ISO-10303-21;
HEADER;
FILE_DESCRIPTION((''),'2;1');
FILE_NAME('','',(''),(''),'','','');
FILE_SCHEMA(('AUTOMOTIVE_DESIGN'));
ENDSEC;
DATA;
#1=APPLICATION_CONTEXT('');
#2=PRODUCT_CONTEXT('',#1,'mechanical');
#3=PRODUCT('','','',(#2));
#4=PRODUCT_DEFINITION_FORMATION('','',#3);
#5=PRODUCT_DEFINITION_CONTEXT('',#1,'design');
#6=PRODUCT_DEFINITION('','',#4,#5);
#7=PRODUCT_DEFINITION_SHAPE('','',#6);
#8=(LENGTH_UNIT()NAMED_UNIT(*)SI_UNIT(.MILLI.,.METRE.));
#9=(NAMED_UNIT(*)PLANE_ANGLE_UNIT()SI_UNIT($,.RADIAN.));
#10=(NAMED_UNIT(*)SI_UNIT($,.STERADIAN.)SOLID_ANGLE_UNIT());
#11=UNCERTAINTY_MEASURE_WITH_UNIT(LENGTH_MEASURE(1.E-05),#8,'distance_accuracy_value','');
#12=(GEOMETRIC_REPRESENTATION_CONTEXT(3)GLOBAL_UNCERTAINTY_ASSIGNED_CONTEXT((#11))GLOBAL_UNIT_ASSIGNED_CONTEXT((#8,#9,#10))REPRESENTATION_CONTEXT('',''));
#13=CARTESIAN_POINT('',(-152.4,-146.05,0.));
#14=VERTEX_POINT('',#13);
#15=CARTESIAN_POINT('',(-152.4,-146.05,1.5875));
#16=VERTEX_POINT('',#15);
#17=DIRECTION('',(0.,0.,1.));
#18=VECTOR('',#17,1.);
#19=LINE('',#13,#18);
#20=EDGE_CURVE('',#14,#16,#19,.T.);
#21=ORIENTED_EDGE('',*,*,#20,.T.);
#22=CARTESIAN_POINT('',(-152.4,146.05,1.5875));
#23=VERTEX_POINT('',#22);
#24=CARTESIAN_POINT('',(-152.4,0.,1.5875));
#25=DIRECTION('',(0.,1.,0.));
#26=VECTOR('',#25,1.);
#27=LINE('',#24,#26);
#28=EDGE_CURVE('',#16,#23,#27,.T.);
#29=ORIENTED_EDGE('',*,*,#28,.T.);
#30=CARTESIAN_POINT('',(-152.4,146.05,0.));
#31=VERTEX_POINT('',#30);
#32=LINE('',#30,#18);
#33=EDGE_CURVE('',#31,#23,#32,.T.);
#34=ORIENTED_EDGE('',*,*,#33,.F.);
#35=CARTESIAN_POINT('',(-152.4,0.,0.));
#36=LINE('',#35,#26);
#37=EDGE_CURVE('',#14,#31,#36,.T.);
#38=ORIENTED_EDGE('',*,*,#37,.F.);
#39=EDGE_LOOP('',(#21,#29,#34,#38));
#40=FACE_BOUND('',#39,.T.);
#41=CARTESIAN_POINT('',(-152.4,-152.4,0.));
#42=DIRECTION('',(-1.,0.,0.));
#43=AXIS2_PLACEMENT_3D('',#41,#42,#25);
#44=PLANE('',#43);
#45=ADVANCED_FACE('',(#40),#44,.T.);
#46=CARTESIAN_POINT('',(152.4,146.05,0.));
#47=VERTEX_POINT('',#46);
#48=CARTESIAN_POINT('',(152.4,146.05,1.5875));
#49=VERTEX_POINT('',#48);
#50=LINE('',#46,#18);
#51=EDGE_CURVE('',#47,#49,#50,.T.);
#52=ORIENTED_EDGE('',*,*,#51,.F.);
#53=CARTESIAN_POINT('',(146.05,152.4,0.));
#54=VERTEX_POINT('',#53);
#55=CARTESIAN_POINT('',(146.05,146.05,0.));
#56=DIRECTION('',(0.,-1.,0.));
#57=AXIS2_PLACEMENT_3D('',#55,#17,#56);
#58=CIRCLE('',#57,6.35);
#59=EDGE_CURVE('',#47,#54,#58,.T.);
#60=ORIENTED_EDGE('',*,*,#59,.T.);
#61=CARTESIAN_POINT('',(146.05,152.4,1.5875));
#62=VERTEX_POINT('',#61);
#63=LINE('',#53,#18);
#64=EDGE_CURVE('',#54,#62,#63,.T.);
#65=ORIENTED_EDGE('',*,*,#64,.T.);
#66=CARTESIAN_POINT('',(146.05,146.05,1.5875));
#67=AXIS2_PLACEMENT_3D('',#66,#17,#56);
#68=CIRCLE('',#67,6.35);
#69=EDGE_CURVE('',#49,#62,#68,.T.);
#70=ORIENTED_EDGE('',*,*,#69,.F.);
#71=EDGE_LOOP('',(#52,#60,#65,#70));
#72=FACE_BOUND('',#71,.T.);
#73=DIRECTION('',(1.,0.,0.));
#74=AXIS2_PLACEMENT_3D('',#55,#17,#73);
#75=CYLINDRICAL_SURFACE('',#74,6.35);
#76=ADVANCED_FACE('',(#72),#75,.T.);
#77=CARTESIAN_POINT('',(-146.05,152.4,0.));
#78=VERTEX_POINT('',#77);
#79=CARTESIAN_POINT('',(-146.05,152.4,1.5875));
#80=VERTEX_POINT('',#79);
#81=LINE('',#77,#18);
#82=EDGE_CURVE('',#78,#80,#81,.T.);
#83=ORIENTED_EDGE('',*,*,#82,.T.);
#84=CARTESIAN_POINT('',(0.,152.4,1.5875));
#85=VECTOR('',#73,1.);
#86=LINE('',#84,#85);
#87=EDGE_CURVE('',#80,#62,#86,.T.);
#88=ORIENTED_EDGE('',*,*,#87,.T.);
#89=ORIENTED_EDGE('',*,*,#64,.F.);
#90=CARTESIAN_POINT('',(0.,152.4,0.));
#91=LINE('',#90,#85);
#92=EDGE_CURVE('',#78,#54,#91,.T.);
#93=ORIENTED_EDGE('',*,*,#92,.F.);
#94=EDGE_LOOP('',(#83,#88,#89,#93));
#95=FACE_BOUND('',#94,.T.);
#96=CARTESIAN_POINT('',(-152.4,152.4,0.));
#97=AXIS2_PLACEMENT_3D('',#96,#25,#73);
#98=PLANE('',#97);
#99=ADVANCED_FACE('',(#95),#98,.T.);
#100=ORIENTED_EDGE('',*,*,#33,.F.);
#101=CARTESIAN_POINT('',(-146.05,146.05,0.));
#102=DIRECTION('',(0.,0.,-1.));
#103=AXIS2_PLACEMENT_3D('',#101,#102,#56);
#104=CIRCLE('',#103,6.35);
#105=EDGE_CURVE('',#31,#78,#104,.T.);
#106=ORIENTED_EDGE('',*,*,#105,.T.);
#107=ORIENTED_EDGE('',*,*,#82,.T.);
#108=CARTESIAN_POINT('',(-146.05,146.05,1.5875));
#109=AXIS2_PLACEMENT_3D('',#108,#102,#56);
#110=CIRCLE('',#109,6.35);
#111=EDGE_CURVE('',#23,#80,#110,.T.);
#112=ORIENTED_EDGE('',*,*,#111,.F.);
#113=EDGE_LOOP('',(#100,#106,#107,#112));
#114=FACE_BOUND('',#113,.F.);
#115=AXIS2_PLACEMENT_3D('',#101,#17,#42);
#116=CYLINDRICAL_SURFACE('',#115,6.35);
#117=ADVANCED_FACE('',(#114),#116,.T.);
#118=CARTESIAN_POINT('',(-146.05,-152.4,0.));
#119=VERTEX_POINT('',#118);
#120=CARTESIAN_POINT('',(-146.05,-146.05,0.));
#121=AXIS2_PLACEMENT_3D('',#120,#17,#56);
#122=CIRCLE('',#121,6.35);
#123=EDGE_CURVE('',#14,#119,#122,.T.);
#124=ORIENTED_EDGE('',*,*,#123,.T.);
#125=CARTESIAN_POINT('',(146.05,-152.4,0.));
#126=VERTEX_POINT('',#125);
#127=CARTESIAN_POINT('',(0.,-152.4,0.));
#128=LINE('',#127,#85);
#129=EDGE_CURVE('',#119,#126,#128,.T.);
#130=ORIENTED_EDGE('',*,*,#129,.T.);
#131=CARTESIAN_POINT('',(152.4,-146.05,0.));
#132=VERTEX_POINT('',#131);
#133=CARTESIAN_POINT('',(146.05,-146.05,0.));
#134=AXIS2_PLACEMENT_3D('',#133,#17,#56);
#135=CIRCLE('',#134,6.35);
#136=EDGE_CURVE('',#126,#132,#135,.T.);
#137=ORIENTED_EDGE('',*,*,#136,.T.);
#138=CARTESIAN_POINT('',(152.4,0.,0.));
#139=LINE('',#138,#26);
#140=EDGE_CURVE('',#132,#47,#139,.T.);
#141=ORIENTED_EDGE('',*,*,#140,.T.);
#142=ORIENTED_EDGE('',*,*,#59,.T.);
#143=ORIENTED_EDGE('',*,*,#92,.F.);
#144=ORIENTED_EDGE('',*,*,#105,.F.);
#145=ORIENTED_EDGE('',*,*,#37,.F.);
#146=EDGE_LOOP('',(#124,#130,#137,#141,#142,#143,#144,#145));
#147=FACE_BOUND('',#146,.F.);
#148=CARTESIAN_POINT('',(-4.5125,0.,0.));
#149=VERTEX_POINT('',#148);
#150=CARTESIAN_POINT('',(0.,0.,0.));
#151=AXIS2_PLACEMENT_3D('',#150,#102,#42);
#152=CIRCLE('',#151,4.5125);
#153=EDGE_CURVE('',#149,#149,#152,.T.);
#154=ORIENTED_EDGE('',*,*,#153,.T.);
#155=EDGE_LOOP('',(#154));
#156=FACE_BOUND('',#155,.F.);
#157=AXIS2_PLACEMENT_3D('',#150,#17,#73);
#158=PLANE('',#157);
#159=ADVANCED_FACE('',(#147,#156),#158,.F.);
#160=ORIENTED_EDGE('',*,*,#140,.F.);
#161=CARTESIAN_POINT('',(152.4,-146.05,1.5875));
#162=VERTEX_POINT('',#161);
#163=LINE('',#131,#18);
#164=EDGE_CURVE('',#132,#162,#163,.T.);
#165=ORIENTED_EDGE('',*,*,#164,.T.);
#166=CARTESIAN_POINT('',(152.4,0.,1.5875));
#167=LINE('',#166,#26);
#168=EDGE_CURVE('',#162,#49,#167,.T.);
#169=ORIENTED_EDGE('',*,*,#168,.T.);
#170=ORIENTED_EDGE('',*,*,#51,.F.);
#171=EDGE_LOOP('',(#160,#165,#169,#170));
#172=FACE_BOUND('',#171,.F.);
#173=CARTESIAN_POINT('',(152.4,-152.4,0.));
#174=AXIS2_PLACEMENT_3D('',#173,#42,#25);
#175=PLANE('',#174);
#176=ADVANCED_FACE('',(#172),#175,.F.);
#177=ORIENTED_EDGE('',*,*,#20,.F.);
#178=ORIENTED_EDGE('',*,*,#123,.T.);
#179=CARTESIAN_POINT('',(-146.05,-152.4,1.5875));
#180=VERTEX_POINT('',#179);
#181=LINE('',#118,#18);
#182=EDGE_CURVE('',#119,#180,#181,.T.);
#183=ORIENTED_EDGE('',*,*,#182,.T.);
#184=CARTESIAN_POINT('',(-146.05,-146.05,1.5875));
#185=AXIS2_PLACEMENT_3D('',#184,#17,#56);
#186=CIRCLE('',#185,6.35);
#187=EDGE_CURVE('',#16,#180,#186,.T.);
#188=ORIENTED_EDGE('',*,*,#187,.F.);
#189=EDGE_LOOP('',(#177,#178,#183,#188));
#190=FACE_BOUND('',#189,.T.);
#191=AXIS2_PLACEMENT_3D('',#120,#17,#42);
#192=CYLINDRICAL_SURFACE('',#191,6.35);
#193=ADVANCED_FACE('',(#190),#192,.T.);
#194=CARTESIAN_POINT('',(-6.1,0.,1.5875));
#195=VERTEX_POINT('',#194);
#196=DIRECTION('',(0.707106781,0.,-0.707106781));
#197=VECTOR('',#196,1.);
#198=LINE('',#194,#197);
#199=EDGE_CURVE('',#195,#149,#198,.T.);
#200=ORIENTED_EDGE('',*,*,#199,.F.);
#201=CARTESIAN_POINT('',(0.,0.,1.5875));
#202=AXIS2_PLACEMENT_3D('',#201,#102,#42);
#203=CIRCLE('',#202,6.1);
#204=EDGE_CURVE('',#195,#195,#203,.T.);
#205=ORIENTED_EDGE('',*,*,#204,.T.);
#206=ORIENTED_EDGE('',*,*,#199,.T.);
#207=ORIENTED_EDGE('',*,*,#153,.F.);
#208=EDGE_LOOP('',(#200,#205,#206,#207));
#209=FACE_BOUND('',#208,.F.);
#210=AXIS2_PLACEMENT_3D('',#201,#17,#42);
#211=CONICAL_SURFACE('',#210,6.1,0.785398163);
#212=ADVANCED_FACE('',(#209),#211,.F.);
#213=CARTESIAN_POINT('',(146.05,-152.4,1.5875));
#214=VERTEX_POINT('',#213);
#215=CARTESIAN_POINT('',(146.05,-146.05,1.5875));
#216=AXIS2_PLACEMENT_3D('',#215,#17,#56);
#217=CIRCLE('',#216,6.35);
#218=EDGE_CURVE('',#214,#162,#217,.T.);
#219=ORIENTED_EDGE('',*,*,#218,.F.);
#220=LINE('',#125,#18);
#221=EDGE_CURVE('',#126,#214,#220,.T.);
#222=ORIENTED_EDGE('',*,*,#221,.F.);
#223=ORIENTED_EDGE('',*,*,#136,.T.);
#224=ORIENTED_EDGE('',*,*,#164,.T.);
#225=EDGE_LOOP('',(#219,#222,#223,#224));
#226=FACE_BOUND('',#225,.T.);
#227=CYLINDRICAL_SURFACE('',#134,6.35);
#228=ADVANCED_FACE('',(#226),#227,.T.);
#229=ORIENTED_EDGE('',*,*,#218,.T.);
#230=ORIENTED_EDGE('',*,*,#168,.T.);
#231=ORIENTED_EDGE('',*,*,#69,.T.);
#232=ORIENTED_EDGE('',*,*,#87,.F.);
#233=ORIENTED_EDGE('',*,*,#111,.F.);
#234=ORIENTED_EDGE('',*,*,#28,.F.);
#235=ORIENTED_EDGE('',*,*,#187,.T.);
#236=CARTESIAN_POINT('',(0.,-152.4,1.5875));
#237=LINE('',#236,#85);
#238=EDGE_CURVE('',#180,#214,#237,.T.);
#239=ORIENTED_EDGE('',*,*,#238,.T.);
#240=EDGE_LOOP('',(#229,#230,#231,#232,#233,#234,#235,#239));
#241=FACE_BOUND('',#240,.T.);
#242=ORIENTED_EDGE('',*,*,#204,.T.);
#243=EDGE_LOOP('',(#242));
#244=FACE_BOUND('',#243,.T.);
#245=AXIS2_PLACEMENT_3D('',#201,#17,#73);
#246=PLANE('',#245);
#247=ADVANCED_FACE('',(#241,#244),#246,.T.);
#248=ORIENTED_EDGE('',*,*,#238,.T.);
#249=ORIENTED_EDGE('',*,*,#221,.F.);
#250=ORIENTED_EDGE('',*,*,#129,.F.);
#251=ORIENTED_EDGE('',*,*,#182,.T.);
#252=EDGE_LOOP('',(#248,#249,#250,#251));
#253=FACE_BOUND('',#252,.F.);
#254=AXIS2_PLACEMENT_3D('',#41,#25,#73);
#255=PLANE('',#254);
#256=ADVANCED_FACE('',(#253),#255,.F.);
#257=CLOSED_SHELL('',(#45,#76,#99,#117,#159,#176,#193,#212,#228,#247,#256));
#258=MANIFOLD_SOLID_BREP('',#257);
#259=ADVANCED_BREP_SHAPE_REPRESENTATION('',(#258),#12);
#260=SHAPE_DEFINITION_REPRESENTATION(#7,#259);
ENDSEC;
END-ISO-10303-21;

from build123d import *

# Parameters (mm, degrees)
F0_W           = 304.8
F0_H           = 304.8
F1_DEPTH       = 1.5875
F2_R           = 6.35
F4_D           = 6.2
F4_CSINK_D     = 12.2
F4_CSINK_ANGLE = 90


# Not quite as in the source:
# - a length typed as a fraction of an inch, garbled in the dataset ("3 / 203.2 mm" for 3/8 in), is restored


with BuildPart() as f1:
    # F0 (on Top) → F1 (new body)
    with BuildSketch(Plane.XY):
        Rectangle(F0_W, F0_H)
    extrude(amount=F1_DEPTH)

    # F2
    f2_edges = [f1.edges().sort_by_distance(p)[0] for p in [
        (-152.4, -152.4, 0.79375),
        (152.4, -152.4, 0.79375),
        (152.4, 152.4, 0.79375),
        (-152.4, 152.4, 0.79375),
    ]]
    fillet(f2_edges, radius=F2_R)

    # F4 (through all)
    with Locations(Plane.XY.offset(1.5875)):
        with Locations((0, 0)):
            CounterSinkHole(F4_D / 2, F4_CSINK_D / 2, counter_sink_angle=F4_CSINK_ANGLE)


solid = f1.part
